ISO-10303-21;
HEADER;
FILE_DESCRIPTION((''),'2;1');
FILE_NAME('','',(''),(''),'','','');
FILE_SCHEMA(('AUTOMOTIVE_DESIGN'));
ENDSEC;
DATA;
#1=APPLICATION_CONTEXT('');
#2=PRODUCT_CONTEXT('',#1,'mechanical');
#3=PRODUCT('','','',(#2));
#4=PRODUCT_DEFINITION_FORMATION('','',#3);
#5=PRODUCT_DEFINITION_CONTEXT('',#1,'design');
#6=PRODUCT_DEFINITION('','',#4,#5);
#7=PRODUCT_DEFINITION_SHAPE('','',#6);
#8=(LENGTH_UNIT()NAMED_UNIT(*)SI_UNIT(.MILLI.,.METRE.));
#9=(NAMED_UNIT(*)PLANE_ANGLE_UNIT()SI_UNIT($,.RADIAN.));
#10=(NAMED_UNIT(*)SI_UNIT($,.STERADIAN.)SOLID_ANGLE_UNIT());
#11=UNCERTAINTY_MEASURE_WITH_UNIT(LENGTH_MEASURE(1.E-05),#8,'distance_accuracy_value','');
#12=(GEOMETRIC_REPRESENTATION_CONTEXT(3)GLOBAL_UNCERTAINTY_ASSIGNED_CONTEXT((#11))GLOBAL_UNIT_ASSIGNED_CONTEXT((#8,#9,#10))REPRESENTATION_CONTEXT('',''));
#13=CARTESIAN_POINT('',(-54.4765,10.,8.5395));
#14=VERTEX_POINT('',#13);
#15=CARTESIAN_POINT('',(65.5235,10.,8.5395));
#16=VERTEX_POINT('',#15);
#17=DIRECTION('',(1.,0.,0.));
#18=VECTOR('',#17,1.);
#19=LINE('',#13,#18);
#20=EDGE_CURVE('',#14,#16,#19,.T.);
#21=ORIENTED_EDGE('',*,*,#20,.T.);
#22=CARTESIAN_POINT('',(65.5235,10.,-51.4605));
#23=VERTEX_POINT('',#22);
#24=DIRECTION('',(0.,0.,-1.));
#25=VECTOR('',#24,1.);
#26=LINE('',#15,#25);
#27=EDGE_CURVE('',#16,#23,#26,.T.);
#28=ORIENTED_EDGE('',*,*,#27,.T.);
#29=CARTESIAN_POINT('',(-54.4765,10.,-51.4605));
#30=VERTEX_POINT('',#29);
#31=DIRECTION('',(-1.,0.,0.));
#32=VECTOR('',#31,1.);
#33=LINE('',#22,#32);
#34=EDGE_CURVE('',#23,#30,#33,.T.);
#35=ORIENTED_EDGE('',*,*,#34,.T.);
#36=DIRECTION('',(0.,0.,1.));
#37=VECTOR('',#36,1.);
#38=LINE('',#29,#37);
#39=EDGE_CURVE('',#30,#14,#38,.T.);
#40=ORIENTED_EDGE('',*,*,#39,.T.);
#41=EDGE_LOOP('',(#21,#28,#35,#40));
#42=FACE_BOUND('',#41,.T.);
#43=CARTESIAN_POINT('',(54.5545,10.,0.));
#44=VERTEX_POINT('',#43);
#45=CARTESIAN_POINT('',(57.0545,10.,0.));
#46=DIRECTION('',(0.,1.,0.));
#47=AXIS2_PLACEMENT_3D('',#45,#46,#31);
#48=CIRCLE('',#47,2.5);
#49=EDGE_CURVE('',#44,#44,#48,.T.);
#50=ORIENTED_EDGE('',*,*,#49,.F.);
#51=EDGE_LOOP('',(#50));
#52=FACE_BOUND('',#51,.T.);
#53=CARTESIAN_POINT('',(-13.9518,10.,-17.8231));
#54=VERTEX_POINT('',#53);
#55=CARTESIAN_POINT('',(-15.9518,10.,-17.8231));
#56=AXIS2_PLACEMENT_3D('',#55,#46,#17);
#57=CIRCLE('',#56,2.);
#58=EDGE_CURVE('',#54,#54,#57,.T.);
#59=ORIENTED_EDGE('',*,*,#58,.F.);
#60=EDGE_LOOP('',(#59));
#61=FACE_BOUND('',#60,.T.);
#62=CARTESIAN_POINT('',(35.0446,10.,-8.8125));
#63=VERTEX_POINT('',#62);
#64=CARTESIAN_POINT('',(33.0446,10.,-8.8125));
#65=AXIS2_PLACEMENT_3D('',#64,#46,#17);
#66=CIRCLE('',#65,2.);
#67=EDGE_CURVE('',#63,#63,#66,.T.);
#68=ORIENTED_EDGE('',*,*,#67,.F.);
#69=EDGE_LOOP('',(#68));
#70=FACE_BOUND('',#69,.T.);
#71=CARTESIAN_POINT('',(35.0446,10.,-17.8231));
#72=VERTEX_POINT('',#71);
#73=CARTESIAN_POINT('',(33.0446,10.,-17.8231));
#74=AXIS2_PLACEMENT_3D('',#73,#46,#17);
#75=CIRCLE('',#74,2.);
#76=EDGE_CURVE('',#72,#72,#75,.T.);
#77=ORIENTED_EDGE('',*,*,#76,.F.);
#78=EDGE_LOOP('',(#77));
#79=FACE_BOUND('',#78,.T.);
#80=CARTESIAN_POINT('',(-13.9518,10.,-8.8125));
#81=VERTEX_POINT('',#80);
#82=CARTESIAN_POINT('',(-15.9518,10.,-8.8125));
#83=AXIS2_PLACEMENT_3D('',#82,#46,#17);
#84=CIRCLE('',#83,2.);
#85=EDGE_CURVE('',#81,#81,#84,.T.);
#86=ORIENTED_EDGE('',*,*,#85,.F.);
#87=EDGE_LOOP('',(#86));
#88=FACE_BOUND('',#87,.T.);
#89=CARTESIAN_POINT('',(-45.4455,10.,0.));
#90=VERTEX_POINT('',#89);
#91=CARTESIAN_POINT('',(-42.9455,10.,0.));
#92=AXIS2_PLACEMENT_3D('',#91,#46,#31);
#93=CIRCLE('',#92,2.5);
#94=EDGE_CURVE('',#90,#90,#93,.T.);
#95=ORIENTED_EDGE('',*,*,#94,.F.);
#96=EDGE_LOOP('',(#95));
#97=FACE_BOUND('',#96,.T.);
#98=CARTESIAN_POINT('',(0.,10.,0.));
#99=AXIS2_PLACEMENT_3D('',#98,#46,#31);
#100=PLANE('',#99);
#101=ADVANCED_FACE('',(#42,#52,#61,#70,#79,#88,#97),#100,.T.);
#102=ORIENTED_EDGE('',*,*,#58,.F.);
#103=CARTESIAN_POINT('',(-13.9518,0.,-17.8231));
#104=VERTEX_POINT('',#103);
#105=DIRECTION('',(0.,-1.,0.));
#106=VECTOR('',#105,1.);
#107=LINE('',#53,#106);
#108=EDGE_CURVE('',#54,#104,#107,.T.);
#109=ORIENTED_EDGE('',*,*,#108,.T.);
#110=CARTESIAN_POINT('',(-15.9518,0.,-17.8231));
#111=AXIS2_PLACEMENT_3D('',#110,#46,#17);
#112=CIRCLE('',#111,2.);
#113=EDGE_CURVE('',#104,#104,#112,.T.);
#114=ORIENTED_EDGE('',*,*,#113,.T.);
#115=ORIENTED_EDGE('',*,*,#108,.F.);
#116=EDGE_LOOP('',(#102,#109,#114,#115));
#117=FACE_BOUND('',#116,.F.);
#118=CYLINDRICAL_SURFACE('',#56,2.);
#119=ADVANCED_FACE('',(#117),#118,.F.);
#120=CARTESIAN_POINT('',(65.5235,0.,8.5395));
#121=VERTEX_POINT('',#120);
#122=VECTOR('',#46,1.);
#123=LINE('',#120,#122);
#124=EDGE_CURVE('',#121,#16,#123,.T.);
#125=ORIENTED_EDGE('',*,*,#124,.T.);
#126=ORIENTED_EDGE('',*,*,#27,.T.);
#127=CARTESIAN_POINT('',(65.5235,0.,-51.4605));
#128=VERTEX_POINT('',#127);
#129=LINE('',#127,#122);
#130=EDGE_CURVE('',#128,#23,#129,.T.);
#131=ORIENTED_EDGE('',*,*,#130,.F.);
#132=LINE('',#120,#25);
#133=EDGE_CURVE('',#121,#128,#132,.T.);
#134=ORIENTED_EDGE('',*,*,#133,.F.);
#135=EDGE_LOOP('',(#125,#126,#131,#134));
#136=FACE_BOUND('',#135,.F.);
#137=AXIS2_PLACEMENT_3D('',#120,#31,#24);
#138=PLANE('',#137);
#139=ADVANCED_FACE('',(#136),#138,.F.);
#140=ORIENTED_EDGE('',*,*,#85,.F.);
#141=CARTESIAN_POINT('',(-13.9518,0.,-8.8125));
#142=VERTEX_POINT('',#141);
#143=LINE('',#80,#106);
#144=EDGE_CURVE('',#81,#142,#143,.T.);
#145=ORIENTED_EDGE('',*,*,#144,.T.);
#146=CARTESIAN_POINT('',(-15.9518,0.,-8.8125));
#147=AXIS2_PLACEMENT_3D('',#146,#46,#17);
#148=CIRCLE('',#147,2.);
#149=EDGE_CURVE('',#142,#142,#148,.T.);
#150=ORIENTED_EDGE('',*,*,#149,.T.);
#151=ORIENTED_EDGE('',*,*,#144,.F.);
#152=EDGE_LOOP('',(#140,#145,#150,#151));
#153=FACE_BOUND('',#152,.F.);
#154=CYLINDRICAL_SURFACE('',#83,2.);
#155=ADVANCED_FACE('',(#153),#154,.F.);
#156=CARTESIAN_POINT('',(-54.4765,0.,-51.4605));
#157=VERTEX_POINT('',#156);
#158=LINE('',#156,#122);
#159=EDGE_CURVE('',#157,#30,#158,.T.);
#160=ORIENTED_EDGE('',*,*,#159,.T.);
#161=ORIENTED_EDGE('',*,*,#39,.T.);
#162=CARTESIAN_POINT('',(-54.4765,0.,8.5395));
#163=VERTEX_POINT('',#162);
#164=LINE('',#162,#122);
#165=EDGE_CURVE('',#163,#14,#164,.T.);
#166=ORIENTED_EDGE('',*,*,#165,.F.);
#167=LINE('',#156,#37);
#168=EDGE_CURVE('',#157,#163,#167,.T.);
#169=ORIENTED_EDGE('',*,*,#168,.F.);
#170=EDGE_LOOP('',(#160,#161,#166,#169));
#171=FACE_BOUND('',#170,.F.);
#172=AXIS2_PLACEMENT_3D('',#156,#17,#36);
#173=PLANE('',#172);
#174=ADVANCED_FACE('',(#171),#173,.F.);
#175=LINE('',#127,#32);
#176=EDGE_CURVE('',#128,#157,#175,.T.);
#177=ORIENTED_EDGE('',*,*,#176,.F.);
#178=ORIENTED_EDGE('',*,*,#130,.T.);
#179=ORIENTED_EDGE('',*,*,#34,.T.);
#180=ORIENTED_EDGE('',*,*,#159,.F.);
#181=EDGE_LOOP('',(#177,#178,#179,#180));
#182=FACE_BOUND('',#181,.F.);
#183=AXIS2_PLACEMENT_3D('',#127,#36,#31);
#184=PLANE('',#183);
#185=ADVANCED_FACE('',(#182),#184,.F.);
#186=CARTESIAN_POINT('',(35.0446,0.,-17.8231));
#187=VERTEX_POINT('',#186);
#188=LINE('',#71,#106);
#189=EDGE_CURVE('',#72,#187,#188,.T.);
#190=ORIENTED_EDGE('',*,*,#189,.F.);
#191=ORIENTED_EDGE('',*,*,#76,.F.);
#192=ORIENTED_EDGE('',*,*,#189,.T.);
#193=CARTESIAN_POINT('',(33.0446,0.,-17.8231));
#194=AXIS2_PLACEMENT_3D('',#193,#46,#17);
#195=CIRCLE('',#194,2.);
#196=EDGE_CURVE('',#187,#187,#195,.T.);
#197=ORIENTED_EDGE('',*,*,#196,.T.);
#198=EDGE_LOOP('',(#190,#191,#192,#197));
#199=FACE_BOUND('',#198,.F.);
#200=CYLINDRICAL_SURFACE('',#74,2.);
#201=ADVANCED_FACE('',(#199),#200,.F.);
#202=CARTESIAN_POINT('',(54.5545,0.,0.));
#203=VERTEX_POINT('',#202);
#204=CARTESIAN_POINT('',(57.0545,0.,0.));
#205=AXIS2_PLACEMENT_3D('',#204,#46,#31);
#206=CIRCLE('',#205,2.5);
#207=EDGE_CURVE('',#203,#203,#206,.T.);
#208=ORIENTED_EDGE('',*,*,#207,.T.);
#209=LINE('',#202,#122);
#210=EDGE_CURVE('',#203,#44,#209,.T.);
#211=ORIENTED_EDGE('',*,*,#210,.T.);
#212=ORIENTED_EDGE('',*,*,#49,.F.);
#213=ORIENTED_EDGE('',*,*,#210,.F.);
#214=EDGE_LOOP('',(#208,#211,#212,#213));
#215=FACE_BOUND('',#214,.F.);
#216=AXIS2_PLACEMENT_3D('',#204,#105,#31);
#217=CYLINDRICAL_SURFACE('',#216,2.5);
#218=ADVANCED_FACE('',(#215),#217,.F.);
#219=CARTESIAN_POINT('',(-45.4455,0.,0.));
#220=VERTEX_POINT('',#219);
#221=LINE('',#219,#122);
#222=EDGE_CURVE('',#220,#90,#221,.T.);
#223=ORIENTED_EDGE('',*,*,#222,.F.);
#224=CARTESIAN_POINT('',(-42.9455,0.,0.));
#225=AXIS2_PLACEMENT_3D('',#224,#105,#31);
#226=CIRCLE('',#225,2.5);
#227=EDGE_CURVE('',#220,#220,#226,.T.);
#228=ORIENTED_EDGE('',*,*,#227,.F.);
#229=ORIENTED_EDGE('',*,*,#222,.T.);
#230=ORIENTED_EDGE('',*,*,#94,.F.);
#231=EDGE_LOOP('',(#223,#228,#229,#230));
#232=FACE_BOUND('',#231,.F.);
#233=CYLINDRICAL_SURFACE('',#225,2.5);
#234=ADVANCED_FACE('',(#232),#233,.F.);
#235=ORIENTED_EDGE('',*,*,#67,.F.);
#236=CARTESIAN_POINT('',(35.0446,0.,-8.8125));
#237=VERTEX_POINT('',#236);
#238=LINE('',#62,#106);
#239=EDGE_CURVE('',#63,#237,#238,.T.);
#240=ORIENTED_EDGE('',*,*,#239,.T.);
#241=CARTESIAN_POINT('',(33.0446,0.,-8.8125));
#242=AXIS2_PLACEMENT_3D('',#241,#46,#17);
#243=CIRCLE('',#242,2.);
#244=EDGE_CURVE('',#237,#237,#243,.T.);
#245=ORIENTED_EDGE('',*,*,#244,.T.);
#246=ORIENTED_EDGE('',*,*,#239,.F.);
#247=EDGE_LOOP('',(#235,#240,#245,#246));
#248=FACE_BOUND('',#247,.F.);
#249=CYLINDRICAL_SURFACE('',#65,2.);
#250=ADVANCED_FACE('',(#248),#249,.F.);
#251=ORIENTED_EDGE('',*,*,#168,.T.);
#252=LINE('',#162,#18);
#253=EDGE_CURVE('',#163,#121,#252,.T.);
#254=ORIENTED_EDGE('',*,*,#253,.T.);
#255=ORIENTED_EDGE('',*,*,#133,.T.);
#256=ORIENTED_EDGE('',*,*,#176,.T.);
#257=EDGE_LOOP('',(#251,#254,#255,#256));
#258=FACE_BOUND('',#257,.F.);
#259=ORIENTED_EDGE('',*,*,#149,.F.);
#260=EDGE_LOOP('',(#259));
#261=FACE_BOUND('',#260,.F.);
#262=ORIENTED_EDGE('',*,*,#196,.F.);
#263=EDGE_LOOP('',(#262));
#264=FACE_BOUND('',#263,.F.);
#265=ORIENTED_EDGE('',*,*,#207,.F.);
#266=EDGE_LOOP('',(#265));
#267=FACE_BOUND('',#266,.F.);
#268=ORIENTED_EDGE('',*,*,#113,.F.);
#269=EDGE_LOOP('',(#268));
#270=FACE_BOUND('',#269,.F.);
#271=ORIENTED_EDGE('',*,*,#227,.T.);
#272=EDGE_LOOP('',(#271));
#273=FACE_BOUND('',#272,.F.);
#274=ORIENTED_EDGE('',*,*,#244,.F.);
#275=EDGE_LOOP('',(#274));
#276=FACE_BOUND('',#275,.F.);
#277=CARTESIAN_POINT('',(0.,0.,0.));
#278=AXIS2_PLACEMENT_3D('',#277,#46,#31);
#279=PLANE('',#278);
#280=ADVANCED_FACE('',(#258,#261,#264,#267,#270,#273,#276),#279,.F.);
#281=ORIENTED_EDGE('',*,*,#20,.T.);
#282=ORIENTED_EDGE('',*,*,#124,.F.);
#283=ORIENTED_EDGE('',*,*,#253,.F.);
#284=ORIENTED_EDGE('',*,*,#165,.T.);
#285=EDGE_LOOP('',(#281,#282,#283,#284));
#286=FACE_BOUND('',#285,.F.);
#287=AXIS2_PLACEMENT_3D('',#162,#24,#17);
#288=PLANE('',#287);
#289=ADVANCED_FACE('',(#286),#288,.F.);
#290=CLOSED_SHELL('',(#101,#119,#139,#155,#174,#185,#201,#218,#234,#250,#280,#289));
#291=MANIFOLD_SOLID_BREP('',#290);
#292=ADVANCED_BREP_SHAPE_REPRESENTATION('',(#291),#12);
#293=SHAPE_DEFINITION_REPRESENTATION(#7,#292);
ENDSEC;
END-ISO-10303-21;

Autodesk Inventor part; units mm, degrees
ref_plane "YZ Plane" through (0, 0, 0) normal (1, 0, 0) x (0, 1, 0)
ref_plane "XZ Plane" through (0, 0, 0) normal (0, 1, 0) x (-1, 0, 0)
ref_plane "XY Plane" through (0, 0, 0) normal (0, 0, 1) x (1, 0, 0)
sketch "Sketch1" plane through (0, 0, 0) normal (0, 1, 0) x (-1, 0, 0)
  line L0 (54.4765, 8.5395) -> (-65.5235, 8.5395)
  line L1 (-65.5235, 8.5395) -> (-65.5235, -51.4605)
  line L2 (-65.5235, -51.4605) -> (54.4765, -51.4605)
  line L3 (54.4765, -51.4605) -> (54.4765, 8.5395)
  line L4 (42.9455, 0) -> (-57.0545, 0)
  circle A0 centre (42.9455, 0) radius 2.5
  circle A1 centre (-57.0545, 0) radius 2.5
  point P0 (0, 0)
  dimension "d0" = 120
  dimension "d1" = 60
  dimension "d2" = 100
  dimension "d3" = 5
  dimension "d4" = 5
extrude "Extrusion1" add sketch "Sketch1" along normal blind 10
sketch "Sketch2" plane through (0, 10, 0) normal (0, 1, 0) x (1, 0, 0)
  line L0 (-16.1382, 5.2435) -> (17.0718, 5.2435)
  circle A0 centre (-16.1382, 5.2435) radius 1
  circle A1 centre (17.0718, 5.2435) radius 1
  point P0 (0, 0)
  dimension "d7" = 33.21
  dimension "d8" = 2
  dimension "d9" = 2
extrude "Extrusion2" cut sketch "Sketch2" along normal blind 10
sketch "Sketch3" plane through (0, 10, 0) normal (0, 1, 0) x (1, 0, 0)
  point P0 (0, 0)
sketch "Sketch4" plane through (0, 10, 0) normal (0, 1, 0) x (1, 0, 0)
  circle A0 centre (-16.1382, 5.2435) radius 1 projected
  circle A1 centre (30.8669, 5.2794) radius 1
  point P0 (0, 0)
  dimension "d13" = 2
extrude "Extrusion3" cut sketch "Sketch4" along normal blind 10 contours A1
sketch "Sketch5" plane through (0, 10, 0) normal (0, 1, 0) x (1, 0, 0)
  circle A0 centre (-16.1382, 5.2435) radius 1 projected
  circle A1 centre (30.8669, 5.2794) radius 1 projected
  circle A2 centre (30.8669, 14.2341) radius 2
  circle A3 centre (-16.1382, 14.2341) radius 2
  point P0 (0, 0)
  dimension "d20" = 4
  dimension "d21" = 4
extrude "Extrusion4" cut sketch "Sketch5" along normal blind 10 contours A2 | A3
sketch "Sketch6" plane through (0, 10, 0) normal (0, 1, 0) x (1, 0, 0)
  circle A0 centre (-15.9518, 8.8125) radius 2
  circle A1 centre (33.0446, 8.8125) radius 2
  circle A2 centre (-15.9518, 17.8231) radius 2
  circle A3 centre (33.0446, 17.8231) radius 2
  point P0 (0, 0)
  dimension "d24" = 4
  dimension "d26" = 4
  dimension "d30" = 4
extrude "Extrusion5" cut sketch "Sketch6" against normal blind 10
properties part number "servostand"
